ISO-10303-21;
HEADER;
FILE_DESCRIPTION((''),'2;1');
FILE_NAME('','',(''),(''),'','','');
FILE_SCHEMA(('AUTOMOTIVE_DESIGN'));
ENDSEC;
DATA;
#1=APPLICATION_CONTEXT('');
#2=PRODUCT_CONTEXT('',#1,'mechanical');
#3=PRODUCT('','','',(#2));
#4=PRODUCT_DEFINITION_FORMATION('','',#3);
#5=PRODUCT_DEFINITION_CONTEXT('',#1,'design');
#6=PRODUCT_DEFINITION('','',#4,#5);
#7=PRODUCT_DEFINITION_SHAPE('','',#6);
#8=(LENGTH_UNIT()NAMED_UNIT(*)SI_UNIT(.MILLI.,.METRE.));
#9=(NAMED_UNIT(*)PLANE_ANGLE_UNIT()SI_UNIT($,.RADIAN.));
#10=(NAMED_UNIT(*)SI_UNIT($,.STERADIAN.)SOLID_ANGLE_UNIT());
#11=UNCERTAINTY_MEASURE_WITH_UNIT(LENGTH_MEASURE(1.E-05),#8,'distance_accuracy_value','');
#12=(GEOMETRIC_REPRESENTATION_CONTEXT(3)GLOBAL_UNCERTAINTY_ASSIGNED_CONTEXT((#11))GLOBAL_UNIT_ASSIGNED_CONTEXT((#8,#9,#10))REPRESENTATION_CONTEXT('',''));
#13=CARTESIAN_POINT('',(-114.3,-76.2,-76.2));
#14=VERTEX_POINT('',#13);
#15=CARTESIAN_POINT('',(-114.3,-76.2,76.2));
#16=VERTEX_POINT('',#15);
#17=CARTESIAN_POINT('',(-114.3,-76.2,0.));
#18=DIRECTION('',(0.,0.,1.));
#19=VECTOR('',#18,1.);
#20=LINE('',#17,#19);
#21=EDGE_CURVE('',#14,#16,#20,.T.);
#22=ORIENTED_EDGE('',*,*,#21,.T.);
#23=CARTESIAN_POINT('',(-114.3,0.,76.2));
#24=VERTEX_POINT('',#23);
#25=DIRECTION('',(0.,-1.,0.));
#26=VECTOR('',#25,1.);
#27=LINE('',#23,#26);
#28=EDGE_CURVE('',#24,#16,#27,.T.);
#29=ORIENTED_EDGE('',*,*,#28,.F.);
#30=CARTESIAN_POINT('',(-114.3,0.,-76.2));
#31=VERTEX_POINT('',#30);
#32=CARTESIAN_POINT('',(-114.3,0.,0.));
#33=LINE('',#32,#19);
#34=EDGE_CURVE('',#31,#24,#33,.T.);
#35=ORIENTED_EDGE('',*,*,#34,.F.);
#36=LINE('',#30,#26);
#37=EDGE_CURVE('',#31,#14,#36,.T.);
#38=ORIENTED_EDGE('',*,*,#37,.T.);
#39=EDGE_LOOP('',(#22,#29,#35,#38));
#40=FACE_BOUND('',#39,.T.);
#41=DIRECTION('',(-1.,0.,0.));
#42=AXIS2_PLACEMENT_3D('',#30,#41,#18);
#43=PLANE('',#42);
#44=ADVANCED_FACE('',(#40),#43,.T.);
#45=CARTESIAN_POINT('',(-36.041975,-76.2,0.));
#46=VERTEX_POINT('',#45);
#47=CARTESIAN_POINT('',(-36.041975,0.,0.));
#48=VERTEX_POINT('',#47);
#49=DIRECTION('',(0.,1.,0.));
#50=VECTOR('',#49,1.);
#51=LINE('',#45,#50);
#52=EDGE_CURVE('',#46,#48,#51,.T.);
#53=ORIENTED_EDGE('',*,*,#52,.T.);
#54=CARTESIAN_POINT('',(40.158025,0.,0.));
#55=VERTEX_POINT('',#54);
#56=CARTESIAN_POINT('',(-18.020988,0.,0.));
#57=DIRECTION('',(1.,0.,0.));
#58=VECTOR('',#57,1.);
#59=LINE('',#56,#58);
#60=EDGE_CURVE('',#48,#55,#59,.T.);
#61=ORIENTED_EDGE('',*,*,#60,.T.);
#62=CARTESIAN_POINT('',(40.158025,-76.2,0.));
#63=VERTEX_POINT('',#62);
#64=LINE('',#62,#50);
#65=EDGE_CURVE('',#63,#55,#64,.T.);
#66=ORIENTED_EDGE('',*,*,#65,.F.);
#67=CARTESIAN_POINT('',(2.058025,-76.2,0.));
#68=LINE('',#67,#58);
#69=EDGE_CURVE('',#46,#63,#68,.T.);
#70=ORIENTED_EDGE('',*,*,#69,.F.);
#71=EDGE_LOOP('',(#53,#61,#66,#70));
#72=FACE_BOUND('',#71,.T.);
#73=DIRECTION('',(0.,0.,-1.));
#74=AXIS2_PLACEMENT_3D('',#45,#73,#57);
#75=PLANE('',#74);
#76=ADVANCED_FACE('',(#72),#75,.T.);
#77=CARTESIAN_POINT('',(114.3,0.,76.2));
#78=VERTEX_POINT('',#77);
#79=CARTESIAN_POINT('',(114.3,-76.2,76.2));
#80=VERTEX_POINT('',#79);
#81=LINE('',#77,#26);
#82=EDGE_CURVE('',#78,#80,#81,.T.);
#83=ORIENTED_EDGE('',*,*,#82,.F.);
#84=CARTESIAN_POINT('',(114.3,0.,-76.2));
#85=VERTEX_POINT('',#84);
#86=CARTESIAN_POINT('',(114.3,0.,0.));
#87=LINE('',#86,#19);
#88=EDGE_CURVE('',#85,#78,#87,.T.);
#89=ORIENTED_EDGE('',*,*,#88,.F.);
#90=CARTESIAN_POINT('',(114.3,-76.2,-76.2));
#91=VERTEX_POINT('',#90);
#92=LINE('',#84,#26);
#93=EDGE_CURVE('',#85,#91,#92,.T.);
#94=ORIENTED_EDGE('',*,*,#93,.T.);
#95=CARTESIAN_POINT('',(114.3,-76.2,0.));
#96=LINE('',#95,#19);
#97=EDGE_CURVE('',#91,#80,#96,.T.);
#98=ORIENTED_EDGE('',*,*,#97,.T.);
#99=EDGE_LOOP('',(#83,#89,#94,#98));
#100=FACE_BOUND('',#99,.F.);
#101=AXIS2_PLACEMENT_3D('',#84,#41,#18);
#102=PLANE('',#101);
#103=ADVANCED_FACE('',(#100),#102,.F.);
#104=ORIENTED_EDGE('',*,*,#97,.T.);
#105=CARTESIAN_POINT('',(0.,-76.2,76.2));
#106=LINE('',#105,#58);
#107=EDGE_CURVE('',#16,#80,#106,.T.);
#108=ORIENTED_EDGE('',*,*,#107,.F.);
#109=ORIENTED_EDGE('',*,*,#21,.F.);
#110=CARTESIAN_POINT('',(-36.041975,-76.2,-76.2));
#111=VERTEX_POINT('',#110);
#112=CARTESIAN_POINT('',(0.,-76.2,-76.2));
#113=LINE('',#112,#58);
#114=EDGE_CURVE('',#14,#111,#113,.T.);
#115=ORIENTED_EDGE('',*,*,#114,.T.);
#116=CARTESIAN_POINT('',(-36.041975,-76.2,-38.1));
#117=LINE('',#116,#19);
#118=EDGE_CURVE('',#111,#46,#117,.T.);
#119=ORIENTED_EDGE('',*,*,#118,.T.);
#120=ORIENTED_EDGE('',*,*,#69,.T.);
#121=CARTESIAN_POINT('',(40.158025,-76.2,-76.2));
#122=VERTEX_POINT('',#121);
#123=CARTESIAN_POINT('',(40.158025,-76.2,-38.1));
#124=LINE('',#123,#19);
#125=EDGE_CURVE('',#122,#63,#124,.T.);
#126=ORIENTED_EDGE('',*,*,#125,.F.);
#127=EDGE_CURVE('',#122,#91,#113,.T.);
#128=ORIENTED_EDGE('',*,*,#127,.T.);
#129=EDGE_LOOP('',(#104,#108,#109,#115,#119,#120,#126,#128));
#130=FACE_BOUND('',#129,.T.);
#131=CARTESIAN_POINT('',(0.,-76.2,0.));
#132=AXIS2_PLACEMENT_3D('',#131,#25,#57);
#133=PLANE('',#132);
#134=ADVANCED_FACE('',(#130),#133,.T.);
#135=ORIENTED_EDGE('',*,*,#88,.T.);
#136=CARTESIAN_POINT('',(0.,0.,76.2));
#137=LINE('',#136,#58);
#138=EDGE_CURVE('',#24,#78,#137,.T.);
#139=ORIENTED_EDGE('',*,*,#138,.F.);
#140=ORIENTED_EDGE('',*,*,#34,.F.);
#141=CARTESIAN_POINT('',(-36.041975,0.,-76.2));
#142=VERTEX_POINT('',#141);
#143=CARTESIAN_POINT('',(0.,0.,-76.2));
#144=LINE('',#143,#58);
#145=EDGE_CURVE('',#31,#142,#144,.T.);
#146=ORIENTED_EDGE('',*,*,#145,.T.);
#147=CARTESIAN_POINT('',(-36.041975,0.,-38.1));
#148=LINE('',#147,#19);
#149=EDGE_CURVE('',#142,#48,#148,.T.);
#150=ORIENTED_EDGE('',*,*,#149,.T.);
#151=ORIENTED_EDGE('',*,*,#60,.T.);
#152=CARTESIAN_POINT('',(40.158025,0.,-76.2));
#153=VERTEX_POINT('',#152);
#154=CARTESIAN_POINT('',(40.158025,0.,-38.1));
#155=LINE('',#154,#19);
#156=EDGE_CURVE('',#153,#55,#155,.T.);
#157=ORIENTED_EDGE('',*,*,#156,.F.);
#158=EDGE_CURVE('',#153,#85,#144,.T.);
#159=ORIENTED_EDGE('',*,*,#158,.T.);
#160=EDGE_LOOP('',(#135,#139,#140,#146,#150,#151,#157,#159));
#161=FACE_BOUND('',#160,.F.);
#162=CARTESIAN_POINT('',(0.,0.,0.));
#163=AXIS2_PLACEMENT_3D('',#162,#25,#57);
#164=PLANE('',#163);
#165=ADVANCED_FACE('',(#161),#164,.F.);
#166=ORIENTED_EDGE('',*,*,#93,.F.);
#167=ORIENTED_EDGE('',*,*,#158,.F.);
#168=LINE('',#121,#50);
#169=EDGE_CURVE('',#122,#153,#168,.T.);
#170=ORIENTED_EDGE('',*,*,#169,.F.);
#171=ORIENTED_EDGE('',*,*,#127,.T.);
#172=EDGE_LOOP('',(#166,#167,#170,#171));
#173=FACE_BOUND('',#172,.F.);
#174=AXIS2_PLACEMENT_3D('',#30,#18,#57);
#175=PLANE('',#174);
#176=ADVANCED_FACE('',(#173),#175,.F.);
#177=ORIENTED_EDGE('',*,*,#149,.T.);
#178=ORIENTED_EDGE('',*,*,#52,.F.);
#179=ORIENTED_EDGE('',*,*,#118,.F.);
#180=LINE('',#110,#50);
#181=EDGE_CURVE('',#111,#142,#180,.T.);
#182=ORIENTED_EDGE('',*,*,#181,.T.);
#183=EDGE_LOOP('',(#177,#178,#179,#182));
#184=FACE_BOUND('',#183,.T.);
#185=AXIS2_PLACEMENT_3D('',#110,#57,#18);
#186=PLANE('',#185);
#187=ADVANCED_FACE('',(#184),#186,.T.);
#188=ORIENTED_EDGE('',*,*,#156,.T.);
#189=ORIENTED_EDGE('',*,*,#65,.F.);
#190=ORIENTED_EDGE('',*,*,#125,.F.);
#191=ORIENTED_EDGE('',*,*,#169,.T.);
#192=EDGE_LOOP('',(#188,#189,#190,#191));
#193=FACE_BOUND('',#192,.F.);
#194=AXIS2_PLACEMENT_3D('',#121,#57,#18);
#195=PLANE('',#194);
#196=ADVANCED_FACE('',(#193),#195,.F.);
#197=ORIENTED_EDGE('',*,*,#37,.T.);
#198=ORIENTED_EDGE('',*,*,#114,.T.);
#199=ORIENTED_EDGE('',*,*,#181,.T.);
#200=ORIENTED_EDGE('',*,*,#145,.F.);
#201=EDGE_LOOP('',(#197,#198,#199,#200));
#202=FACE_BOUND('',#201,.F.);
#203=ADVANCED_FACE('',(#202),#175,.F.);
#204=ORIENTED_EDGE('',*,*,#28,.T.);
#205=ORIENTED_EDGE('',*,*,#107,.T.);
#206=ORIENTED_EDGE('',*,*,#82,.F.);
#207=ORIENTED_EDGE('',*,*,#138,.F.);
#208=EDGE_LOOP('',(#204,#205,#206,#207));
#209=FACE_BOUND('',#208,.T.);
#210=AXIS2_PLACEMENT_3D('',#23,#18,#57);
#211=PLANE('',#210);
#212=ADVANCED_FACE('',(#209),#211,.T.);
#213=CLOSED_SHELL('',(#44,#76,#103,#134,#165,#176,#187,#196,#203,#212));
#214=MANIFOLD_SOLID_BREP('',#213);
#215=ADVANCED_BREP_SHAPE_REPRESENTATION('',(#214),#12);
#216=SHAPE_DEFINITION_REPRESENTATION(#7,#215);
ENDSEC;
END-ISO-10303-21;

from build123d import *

# Parameters (mm, degrees)
F1_W     = 228.6
F1_H     = 152.4
F2_DEPTH = 76.2
F3_W     = 76.2
F3_H     = 76.2
F4_DEPTH = 76.201


# Not quite as in the source:
# - a variable given as a bare number and used for a length is read in inches; the dataset says mm whatever the document's units were


with BuildPart() as f2:
    # F1 (on Front) → F2 (new body)
    with BuildSketch(Plane.XZ):
        Rectangle(F1_W, F1_H)
    extrude(amount=F2_DEPTH)

    # F3 (on face) → F4 (cut, through all)
    with BuildSketch(Plane.XZ.offset(76.2)):
        with Locations((2.0580249786, -38.1)):
            Rectangle(F3_W, F3_H)
    extrude(amount=-F4_DEPTH, mode=Mode.SUBTRACT)


solid = f2.part
